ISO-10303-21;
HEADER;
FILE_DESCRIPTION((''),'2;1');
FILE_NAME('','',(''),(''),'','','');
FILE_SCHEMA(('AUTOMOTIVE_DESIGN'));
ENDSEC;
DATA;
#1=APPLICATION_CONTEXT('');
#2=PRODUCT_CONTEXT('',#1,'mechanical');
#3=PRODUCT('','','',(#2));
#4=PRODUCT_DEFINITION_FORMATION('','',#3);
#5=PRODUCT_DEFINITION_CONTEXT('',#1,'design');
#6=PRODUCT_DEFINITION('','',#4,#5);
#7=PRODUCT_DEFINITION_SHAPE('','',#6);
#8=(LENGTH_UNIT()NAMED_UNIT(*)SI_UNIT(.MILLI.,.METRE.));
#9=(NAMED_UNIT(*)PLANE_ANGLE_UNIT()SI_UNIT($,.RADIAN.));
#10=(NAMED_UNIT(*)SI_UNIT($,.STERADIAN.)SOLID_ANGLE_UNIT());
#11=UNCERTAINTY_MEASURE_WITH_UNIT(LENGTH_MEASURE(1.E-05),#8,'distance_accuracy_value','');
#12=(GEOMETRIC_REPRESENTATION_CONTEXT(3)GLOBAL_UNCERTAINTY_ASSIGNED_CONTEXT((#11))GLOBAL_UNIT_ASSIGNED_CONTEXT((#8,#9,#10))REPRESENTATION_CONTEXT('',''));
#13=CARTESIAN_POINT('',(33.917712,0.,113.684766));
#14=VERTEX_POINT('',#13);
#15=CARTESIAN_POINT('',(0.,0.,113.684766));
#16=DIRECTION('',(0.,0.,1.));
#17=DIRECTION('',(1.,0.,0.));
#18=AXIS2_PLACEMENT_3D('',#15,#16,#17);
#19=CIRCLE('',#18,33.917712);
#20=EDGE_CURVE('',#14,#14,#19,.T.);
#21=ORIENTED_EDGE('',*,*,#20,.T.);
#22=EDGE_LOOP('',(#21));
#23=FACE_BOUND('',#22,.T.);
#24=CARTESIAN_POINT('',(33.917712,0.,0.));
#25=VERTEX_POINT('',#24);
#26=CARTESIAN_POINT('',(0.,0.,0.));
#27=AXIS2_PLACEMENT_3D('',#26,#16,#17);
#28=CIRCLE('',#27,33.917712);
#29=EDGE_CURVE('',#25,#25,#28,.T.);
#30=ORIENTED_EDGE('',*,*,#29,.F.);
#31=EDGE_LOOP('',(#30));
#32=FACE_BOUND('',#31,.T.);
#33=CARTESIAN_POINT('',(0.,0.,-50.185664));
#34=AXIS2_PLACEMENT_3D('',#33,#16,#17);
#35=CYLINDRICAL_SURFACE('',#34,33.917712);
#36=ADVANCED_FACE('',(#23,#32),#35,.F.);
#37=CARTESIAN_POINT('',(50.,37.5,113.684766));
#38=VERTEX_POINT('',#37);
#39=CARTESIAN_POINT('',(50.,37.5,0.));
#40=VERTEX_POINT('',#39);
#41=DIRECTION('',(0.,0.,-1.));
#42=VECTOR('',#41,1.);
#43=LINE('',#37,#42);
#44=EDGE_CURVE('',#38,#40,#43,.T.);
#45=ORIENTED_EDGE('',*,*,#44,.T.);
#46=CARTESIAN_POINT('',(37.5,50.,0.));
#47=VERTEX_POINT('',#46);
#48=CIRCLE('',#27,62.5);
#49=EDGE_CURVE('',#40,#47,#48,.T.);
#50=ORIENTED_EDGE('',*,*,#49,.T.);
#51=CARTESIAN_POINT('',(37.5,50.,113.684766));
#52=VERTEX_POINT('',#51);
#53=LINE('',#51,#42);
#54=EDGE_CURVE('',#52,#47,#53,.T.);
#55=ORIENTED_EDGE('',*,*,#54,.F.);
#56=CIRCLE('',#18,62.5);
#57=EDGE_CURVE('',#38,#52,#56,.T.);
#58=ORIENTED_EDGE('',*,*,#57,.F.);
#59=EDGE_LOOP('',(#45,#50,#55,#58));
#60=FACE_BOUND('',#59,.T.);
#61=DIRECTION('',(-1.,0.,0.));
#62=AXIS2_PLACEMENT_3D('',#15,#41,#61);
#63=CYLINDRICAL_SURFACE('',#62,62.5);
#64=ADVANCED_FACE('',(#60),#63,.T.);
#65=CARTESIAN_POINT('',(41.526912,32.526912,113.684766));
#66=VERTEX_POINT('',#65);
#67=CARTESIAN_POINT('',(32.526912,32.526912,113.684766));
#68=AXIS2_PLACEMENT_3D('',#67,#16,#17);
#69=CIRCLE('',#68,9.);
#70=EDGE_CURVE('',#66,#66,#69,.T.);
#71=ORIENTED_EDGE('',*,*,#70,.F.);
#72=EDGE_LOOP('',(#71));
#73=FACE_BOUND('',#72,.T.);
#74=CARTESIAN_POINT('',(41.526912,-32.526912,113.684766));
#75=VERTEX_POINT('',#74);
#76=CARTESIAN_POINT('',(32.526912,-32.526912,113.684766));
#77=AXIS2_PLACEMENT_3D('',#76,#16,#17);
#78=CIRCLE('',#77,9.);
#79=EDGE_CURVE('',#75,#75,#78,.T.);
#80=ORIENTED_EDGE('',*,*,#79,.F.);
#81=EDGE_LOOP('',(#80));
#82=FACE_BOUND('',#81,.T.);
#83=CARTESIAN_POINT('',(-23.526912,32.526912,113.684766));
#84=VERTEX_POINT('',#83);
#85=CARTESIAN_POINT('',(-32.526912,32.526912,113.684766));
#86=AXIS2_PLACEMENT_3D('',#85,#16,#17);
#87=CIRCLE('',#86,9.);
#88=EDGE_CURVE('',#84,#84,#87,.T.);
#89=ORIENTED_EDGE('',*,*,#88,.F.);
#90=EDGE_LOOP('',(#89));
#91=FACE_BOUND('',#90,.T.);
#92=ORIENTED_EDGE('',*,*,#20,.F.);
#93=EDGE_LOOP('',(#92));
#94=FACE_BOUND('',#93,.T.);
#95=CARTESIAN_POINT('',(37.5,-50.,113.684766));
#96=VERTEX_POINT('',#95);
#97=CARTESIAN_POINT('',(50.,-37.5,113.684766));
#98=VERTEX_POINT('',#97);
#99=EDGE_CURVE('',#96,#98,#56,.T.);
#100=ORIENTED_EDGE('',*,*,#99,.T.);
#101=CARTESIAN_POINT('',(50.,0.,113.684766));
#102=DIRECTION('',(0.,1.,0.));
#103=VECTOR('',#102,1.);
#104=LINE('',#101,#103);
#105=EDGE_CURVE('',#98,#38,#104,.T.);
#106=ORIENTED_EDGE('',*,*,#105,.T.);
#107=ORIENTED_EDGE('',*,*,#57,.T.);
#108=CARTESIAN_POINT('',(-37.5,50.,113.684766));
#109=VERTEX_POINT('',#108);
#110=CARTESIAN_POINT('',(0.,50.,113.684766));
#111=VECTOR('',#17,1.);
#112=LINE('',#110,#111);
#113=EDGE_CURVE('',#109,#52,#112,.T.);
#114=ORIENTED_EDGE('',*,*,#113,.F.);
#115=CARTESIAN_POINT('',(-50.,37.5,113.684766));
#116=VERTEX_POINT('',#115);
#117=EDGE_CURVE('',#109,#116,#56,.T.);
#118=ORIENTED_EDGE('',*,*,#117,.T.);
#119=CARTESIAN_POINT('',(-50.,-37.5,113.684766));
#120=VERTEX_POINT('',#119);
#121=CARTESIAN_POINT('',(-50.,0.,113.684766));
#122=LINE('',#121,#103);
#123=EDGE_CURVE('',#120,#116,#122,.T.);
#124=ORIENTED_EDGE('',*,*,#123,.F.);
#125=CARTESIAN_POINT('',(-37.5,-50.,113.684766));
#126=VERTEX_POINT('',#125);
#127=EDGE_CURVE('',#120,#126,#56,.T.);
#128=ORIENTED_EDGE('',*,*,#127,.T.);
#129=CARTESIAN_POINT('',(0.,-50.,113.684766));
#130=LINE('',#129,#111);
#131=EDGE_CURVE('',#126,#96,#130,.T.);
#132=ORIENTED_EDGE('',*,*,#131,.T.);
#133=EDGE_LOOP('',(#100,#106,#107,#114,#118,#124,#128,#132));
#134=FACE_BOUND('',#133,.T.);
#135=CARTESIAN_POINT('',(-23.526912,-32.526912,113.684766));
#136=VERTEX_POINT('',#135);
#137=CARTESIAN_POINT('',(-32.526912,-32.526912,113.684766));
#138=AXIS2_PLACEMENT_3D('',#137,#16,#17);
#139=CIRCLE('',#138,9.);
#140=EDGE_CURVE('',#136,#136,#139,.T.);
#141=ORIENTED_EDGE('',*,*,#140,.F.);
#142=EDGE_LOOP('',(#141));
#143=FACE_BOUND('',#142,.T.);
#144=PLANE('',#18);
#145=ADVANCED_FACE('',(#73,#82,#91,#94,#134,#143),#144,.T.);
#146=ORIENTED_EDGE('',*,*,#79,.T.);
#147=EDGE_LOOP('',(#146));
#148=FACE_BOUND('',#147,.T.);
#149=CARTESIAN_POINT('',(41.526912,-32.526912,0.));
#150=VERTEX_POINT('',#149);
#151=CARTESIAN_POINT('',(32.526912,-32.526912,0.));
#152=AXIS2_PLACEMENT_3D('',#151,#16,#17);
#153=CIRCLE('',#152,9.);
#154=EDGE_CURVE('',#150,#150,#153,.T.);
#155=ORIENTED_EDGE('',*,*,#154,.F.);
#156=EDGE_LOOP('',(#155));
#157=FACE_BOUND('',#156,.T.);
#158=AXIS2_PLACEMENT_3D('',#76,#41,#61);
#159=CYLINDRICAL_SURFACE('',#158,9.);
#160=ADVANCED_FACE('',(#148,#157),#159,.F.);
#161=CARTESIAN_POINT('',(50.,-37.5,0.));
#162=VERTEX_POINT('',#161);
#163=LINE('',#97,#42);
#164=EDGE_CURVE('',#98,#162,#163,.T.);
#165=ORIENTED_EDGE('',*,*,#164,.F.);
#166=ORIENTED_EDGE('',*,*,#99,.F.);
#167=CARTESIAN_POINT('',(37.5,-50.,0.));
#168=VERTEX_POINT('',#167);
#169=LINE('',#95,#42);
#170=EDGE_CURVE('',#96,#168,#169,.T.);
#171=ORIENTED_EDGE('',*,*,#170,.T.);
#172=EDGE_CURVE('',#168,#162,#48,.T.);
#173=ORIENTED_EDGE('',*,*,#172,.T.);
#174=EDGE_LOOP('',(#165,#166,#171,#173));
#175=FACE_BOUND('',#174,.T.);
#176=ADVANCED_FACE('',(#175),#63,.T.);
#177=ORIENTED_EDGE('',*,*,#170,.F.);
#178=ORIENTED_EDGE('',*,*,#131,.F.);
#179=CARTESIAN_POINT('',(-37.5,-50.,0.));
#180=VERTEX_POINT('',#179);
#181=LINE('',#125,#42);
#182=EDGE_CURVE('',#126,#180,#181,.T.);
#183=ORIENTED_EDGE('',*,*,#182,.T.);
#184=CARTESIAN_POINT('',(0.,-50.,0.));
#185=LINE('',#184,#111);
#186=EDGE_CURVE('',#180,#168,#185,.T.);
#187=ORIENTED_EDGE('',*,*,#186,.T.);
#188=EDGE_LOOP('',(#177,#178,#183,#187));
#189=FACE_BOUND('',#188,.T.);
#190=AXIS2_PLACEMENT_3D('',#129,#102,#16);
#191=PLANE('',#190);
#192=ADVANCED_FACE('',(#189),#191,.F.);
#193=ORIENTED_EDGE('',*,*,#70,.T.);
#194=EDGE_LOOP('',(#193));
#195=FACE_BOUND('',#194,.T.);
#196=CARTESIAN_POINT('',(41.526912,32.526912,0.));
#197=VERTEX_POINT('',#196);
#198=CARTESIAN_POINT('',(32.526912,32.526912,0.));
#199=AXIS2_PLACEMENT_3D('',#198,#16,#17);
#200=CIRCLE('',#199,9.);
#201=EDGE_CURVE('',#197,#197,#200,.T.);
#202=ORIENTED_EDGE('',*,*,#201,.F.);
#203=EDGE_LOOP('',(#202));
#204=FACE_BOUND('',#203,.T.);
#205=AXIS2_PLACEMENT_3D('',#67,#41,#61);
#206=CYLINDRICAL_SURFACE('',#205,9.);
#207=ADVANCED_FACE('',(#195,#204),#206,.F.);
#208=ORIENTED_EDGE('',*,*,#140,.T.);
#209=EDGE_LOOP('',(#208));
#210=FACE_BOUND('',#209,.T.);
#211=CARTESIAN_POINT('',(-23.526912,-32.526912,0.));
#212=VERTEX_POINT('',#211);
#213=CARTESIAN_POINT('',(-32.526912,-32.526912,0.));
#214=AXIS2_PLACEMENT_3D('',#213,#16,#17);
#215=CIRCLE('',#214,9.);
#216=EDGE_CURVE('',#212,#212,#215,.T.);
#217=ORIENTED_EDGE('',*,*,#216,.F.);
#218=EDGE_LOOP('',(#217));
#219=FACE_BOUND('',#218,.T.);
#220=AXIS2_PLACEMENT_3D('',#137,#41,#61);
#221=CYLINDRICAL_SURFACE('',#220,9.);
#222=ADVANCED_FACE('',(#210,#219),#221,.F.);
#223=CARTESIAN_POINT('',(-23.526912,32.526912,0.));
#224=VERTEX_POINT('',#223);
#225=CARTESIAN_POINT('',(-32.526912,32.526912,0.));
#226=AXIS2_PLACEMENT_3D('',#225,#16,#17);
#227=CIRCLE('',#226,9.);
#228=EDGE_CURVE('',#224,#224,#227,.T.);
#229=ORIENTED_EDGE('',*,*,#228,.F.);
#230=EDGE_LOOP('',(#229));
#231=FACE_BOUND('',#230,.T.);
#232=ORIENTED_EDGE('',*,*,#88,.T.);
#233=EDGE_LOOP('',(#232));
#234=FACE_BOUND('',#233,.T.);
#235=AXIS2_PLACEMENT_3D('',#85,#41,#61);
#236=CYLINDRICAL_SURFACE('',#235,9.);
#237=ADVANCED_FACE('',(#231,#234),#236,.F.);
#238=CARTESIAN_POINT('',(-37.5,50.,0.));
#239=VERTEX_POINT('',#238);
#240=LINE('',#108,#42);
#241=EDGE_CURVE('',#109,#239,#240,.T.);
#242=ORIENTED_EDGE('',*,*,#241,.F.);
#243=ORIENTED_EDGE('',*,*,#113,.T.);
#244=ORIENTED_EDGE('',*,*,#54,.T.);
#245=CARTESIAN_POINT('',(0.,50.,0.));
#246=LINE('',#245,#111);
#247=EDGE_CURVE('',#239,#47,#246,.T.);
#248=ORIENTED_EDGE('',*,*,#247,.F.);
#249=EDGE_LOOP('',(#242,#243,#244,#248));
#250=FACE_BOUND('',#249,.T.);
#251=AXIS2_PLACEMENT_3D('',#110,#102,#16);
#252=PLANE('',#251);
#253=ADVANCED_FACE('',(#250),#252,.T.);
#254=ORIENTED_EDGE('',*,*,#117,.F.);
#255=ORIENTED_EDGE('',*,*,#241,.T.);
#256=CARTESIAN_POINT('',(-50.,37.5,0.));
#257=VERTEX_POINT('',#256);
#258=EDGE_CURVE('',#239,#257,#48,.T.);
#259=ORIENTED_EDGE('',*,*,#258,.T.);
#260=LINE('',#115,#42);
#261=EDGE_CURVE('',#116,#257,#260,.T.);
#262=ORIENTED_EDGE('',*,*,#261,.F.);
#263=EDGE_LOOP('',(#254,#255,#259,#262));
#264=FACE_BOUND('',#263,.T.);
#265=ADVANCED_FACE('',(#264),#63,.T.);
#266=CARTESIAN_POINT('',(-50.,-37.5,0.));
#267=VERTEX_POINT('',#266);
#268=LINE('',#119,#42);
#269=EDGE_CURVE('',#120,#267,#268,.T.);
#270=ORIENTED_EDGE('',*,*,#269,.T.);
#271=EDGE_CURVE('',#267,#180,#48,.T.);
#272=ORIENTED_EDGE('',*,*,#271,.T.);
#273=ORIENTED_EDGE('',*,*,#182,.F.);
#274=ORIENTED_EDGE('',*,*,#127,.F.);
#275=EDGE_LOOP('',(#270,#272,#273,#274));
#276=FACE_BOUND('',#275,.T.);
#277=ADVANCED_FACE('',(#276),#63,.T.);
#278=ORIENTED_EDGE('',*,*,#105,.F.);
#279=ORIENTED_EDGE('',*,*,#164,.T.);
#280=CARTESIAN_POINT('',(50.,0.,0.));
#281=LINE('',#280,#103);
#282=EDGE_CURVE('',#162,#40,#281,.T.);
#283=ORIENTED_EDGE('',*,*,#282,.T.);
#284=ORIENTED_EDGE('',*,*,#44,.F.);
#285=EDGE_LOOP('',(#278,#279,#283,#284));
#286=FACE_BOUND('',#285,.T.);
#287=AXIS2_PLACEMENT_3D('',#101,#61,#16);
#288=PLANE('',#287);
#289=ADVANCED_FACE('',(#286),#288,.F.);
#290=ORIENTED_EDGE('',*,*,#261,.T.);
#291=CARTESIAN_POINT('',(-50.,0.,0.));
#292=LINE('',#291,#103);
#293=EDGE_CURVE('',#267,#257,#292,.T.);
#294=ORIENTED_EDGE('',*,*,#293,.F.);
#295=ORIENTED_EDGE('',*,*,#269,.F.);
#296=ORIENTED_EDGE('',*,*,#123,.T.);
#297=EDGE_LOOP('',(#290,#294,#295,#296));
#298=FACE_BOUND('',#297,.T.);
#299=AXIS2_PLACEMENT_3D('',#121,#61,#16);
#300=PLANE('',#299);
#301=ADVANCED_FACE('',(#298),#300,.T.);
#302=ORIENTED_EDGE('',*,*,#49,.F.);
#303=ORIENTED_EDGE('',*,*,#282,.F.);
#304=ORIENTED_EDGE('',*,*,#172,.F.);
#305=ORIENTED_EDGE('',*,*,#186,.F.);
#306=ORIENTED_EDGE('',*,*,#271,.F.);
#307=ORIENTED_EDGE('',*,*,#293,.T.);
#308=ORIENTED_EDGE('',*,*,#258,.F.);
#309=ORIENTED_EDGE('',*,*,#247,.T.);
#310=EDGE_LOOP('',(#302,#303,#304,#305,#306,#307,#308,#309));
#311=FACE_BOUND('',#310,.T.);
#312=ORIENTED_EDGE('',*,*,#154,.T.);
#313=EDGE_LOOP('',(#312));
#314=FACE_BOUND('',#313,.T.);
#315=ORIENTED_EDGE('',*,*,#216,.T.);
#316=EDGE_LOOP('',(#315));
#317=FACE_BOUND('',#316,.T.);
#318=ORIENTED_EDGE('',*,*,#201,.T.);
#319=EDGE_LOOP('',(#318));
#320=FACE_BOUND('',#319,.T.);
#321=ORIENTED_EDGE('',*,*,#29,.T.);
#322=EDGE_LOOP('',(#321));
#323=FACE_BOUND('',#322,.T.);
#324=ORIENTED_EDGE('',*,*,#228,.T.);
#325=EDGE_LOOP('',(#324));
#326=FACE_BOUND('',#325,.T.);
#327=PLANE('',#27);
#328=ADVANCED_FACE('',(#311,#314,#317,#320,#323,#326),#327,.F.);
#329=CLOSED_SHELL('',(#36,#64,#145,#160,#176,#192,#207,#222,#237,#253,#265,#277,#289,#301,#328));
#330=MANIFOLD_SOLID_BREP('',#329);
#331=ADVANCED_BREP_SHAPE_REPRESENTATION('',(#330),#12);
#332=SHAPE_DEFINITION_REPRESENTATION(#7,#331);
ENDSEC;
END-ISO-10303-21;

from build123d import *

# Parameters (mm, degrees)
SKETCH_1_R          = 9
EXTRUDE_1_DEPTH     = 113.684766057
EXTRUDE_START       = -113.684766057
EXTRUDE_3_OUTLINE_R = 33.917711518
EXTRUDE_3_DEPTH     = 113.684766057


# Read off the part's stored shape, not the designer's step: Вырез-Вытянуть3
with BuildPart() as part:
    # Эскиз1 → Бобышка-Вытянуть1 (new body)
    with BuildSketch(Plane.XY):
        with BuildLine():
            ThreePointArc((-50, -37.5), (-44.194173824, -44.194173824), (-37.5, -50))
            Line((-37.5, -50), (37.5, -50))
            ThreePointArc((37.5, -50), (44.194173824, -44.194173824), (50, -37.5))
            Line((50, -37.5), (50, 37.5))
            ThreePointArc((50, 37.5), (44.194173824, 44.194173824), (37.5, 50))
            Line((37.5, 50), (-37.5, 50))
            ThreePointArc((-37.5, 50), (-44.194173824, 44.194173824), (-50, 37.5))
            Line((-50, 37.5), (-50, -37.5))
        make_face()
        with Locations((-32.526911935, -32.526911935)):
            Circle(SKETCH_1_R, mode=Mode.SUBTRACT)
        with Locations((32.526911935, -32.526911935)):
            Circle(SKETCH_1_R, mode=Mode.SUBTRACT)
        with Locations((-32.526911935, 32.526911935)):
            Circle(SKETCH_1_R, mode=Mode.SUBTRACT)
        with Locations((32.526911935, 32.526911935)):
            Circle(SKETCH_1_R, mode=Mode.SUBTRACT)
    extrude(amount=EXTRUDE_1_DEPTH)

    # Вырез-Вытянуть3 outline → Вырез-Вытянуть3 (cut)
    with BuildSketch(Plane.XY.offset(113.684766057).offset(EXTRUDE_START)):
        Circle(EXTRUDE_3_OUTLINE_R)
    extrude(amount=EXTRUDE_3_DEPTH, mode=Mode.SUBTRACT)


solid = part.part
